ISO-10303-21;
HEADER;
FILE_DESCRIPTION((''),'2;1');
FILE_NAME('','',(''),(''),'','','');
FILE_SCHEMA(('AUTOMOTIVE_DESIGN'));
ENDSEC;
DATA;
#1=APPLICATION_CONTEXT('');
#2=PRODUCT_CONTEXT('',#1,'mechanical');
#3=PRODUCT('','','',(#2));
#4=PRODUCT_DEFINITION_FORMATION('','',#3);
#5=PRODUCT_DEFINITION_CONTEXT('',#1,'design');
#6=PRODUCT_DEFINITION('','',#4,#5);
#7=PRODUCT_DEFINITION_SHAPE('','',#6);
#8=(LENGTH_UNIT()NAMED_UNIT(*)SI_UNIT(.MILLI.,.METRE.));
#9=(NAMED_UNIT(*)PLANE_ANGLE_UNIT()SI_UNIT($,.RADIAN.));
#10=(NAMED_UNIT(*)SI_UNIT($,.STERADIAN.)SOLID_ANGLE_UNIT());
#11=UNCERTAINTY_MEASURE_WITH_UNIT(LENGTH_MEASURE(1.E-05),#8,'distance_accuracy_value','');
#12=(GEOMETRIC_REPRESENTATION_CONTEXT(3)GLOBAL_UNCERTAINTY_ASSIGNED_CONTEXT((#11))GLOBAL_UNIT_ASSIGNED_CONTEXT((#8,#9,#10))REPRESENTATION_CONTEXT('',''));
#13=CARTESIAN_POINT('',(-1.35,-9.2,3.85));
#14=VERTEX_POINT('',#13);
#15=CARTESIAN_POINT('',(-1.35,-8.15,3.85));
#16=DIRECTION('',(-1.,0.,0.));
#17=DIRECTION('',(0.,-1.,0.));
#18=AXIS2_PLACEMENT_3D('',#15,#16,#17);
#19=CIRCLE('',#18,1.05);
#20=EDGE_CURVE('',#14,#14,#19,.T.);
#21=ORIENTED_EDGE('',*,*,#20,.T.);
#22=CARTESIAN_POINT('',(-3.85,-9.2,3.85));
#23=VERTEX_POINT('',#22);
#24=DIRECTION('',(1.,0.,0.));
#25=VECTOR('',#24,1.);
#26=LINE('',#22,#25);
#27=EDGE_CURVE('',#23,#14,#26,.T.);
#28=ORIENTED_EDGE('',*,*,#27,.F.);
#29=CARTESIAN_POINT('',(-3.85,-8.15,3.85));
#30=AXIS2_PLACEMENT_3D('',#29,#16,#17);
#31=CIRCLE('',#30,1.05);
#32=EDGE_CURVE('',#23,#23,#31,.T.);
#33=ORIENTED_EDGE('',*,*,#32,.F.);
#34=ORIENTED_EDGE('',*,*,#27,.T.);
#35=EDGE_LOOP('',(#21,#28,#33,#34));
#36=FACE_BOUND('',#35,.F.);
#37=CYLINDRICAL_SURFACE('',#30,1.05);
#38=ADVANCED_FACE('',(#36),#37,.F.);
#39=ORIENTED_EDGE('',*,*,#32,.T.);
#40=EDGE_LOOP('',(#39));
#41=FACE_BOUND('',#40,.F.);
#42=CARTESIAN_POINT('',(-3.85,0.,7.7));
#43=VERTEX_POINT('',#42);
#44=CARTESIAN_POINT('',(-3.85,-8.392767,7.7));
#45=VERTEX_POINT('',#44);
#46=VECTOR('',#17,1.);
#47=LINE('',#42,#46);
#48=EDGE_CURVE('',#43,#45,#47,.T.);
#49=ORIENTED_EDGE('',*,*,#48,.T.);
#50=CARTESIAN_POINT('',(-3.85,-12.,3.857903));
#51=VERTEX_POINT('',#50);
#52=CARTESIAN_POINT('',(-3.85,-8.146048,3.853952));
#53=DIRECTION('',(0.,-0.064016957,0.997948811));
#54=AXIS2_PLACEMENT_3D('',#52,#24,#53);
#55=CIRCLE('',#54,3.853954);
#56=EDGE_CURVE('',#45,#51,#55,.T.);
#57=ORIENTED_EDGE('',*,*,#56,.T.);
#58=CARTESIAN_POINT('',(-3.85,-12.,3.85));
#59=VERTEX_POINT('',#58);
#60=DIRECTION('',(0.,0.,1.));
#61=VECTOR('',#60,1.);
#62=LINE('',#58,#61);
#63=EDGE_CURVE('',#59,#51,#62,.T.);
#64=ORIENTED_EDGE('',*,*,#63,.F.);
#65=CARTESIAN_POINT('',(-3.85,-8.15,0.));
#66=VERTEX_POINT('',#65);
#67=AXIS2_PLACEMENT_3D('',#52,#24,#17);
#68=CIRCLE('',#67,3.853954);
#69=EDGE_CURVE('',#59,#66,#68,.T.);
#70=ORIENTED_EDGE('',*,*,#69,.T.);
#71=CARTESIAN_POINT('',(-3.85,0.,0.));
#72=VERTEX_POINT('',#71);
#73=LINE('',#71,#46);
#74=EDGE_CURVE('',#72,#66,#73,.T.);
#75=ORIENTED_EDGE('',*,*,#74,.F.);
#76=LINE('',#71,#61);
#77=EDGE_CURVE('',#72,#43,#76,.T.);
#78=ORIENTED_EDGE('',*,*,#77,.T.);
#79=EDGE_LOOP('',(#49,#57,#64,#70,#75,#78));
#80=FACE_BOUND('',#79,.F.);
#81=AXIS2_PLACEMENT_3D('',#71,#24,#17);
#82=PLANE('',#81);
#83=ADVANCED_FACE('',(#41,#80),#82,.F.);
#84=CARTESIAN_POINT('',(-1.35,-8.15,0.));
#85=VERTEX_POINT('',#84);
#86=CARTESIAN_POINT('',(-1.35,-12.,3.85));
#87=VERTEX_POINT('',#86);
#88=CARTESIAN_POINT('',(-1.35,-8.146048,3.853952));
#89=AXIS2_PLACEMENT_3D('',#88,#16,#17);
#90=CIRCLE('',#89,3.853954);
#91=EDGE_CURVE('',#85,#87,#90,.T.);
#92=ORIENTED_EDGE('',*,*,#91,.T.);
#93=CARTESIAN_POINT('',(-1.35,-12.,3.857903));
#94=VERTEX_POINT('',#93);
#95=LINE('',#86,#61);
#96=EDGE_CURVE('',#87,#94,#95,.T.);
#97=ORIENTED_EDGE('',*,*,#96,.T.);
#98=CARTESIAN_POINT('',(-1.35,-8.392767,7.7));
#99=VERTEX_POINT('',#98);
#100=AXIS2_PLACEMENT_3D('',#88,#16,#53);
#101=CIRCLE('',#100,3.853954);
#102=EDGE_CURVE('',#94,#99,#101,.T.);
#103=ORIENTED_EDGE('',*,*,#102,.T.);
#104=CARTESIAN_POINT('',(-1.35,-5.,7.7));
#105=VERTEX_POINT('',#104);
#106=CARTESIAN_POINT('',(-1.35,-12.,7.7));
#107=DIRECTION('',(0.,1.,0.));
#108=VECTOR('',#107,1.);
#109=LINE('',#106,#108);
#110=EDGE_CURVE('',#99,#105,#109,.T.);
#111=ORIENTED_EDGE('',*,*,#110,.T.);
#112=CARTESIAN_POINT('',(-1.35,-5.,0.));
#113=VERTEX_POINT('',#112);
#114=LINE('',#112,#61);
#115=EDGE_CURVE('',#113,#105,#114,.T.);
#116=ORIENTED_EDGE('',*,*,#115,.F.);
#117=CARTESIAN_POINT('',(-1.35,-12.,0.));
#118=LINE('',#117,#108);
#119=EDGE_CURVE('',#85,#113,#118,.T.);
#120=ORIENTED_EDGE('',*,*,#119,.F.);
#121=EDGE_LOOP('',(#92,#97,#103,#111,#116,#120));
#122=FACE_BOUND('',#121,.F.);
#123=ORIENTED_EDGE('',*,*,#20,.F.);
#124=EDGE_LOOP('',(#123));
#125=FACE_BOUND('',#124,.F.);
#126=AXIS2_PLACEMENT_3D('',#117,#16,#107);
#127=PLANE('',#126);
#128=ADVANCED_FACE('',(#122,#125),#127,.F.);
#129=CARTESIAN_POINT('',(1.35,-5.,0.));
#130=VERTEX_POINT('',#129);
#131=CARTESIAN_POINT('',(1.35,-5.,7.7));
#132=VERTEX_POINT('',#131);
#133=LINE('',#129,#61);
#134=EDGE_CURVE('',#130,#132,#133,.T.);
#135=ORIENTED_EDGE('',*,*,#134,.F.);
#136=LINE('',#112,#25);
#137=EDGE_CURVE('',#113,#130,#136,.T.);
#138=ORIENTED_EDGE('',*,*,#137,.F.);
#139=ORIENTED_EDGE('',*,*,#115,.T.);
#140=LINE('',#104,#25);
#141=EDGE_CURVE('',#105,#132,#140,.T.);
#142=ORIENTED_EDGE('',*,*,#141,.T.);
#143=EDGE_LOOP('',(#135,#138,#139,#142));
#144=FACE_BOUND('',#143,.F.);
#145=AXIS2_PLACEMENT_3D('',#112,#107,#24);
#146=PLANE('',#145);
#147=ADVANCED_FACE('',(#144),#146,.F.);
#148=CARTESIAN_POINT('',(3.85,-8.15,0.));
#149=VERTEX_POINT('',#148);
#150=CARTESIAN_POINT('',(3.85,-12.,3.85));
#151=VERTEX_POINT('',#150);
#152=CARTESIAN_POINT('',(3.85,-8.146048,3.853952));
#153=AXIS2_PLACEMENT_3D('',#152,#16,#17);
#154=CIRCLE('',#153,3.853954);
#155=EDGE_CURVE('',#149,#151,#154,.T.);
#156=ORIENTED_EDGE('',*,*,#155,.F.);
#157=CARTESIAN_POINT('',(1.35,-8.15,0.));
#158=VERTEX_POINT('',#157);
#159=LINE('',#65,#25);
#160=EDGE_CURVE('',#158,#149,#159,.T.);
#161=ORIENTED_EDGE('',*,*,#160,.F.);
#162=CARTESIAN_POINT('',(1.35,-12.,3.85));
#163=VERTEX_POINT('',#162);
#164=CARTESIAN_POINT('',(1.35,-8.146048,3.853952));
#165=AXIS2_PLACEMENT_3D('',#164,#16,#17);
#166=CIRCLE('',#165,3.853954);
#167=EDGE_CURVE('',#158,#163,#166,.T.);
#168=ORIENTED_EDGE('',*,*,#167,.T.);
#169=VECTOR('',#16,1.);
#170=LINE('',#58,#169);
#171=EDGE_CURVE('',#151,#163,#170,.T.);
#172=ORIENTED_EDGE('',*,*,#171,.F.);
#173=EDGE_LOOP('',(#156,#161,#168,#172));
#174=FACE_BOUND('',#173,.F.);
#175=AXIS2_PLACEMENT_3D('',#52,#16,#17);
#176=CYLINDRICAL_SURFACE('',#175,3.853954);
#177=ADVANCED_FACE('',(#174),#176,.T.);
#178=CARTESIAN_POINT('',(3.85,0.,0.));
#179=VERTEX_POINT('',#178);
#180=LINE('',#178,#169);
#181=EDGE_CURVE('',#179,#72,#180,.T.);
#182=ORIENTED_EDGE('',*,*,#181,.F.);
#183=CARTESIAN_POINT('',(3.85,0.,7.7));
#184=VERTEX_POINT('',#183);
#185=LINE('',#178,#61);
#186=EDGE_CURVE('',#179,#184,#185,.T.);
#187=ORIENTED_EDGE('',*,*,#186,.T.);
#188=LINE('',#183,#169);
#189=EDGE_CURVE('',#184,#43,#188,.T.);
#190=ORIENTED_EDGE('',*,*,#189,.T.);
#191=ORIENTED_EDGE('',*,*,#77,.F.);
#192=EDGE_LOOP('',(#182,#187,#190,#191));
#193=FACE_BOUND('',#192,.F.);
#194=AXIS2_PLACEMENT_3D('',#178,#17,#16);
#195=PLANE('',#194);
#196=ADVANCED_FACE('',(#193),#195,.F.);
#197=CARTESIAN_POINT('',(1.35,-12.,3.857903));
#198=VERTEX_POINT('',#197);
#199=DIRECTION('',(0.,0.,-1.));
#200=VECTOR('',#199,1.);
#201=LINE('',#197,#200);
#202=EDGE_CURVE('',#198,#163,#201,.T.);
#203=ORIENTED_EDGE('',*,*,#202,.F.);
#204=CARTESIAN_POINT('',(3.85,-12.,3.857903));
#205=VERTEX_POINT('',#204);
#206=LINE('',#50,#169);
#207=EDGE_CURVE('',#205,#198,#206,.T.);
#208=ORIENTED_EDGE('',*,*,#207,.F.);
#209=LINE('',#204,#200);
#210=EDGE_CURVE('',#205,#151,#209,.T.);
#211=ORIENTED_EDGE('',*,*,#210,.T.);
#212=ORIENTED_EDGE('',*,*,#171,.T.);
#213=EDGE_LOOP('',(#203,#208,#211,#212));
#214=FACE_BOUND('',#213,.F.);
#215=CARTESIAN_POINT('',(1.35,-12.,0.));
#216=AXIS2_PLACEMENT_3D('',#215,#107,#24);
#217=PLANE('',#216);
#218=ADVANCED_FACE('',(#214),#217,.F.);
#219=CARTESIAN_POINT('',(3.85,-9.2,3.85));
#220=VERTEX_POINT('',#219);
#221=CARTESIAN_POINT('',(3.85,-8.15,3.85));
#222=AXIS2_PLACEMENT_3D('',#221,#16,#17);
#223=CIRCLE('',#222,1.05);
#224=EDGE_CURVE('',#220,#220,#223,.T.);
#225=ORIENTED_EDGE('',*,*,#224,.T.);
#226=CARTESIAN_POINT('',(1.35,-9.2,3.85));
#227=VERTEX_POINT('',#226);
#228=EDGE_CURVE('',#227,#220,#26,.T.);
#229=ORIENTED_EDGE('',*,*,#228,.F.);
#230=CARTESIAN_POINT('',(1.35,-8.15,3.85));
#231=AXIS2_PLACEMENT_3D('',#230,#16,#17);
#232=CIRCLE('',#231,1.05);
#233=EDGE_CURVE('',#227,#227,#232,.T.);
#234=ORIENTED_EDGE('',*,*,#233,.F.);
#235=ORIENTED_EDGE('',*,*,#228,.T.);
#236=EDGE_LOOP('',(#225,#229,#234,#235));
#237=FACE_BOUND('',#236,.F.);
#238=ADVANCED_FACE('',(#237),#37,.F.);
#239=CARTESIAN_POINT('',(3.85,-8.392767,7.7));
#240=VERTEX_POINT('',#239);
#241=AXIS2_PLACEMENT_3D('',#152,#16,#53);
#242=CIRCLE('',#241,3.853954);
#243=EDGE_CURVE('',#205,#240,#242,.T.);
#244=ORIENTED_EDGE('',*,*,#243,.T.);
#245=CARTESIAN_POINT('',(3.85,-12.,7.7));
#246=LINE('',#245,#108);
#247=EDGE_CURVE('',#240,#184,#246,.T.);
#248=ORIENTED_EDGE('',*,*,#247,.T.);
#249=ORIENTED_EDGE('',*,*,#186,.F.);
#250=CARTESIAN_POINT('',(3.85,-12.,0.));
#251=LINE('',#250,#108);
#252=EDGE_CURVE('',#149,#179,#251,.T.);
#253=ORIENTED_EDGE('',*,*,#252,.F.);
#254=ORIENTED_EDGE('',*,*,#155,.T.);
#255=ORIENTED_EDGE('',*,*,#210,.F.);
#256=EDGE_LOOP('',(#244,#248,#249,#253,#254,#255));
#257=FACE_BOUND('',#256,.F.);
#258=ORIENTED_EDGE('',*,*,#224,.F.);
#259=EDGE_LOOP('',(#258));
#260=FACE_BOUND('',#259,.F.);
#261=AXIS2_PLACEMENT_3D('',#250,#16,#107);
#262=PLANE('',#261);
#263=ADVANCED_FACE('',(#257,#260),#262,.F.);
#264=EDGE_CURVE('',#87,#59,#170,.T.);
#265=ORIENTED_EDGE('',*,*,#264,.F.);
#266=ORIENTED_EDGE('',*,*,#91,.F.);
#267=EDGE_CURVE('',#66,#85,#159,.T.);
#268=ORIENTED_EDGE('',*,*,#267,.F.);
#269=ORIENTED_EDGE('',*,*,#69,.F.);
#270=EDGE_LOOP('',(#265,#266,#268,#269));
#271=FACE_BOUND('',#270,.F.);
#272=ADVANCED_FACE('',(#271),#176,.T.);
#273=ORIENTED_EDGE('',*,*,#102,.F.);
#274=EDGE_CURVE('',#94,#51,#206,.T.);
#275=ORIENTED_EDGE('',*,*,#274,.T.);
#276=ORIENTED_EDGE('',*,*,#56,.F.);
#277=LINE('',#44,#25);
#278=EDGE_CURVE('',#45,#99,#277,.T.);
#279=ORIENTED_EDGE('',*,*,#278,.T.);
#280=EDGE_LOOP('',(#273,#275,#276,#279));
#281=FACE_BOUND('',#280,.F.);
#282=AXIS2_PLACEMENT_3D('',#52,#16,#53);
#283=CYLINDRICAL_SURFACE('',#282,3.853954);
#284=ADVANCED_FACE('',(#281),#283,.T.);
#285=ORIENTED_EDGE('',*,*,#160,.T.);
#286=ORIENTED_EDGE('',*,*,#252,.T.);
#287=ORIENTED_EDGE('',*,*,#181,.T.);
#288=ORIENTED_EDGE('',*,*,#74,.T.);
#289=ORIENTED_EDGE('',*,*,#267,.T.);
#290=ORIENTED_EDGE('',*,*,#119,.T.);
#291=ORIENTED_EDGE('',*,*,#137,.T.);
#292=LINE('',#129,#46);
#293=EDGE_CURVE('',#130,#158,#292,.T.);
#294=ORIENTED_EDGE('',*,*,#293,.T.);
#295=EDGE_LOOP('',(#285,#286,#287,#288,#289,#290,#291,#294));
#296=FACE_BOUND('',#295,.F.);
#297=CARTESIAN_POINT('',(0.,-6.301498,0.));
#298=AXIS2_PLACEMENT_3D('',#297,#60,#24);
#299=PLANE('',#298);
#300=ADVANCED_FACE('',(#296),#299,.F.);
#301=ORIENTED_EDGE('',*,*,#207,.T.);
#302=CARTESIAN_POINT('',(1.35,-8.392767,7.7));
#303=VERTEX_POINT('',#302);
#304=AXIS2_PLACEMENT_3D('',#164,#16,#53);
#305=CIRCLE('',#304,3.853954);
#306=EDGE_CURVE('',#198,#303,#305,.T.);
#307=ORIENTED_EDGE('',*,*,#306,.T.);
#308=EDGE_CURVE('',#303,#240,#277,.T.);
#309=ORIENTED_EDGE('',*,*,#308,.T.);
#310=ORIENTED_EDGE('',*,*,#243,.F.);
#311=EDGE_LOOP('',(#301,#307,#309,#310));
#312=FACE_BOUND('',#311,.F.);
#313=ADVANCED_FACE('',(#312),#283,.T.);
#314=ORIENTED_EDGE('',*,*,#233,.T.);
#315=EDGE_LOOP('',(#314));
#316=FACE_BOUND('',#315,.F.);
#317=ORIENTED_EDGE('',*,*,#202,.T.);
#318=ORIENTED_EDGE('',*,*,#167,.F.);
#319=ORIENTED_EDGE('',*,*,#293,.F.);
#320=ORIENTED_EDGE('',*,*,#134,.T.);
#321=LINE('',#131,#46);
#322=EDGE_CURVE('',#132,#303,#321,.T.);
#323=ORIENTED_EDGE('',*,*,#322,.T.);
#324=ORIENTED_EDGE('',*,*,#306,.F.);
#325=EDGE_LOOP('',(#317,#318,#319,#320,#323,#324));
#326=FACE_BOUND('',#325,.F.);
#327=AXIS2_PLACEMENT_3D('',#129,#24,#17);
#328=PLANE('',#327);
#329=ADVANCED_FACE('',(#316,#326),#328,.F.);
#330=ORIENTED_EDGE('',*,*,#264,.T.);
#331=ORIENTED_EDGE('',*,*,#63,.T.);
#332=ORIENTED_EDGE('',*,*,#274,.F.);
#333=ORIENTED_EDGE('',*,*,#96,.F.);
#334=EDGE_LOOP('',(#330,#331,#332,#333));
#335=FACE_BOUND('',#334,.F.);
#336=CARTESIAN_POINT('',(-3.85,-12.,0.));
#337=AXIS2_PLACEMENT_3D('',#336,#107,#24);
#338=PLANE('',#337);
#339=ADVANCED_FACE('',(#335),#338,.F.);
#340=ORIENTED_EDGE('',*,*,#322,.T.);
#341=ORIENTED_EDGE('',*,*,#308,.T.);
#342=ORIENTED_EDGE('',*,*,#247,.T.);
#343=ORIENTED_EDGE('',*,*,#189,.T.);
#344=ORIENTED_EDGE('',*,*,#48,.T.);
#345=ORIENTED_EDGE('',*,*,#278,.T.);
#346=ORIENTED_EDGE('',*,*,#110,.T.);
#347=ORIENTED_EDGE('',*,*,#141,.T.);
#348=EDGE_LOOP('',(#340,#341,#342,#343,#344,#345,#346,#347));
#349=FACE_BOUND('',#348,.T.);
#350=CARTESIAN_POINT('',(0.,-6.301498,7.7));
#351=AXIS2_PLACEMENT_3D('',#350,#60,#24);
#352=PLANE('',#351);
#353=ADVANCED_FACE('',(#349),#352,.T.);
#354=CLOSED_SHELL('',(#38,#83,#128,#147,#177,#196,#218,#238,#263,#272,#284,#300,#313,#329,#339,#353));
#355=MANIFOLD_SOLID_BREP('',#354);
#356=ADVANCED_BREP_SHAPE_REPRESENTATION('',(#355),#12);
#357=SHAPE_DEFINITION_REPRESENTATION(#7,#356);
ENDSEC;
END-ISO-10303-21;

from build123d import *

# Parameters (mm, degrees)
F1_DEPTH = 7.7
F2_R     = 1.05
F3_DEPTH = 10


# Not quite as in the source:
# - ends of sketch curves that miss each other by under 0.0002 mm in the source are joined


with BuildPart() as f1:
    # F0 (on Top) → F1 (new body)
    with BuildSketch(Plane.XY):
        Polygon((3.85, 0), (0, 0), (-3.85, 0), (-3.85, -12), (-1.35, -12), (-1.35, -5), (0, -5), (1.35, -5), (1.35, -12), (3.85, -12), align=None)
    extrude(amount=F1_DEPTH)

    # F2 (on face) → F3 (cut)
    with BuildSketch(Plane(origin=(-3.85, 0, 0), x_dir=(0, -1, 0), z_dir=(-1, 0, 0))):
        with Locations((8.15, 3.85)):
            Circle(F2_R)
        with BuildLine():
            ThreePointArc((8.3927668004, 7.7), (10.9570802224, 6.4904376141), (12.0000020258, 3.8539515808))
            Line((12.0000020258, 3.8539515808), (12, 7.7))
            Line((12, 7.7), (8.3927668004, 7.7))
        make_face()
        with BuildLine():
            ThreePointArc((12.0000020258, 3.8539515808), (10.8726018857, 1.1301923043), (8.15, 0))
            Line((8.15, 0), (12, 0))
            Line((12, 0), (12.0000020258, 3.8539515808))
        make_face()
    extrude(amount=-F3_DEPTH, mode=Mode.SUBTRACT)


solid = f1.part
